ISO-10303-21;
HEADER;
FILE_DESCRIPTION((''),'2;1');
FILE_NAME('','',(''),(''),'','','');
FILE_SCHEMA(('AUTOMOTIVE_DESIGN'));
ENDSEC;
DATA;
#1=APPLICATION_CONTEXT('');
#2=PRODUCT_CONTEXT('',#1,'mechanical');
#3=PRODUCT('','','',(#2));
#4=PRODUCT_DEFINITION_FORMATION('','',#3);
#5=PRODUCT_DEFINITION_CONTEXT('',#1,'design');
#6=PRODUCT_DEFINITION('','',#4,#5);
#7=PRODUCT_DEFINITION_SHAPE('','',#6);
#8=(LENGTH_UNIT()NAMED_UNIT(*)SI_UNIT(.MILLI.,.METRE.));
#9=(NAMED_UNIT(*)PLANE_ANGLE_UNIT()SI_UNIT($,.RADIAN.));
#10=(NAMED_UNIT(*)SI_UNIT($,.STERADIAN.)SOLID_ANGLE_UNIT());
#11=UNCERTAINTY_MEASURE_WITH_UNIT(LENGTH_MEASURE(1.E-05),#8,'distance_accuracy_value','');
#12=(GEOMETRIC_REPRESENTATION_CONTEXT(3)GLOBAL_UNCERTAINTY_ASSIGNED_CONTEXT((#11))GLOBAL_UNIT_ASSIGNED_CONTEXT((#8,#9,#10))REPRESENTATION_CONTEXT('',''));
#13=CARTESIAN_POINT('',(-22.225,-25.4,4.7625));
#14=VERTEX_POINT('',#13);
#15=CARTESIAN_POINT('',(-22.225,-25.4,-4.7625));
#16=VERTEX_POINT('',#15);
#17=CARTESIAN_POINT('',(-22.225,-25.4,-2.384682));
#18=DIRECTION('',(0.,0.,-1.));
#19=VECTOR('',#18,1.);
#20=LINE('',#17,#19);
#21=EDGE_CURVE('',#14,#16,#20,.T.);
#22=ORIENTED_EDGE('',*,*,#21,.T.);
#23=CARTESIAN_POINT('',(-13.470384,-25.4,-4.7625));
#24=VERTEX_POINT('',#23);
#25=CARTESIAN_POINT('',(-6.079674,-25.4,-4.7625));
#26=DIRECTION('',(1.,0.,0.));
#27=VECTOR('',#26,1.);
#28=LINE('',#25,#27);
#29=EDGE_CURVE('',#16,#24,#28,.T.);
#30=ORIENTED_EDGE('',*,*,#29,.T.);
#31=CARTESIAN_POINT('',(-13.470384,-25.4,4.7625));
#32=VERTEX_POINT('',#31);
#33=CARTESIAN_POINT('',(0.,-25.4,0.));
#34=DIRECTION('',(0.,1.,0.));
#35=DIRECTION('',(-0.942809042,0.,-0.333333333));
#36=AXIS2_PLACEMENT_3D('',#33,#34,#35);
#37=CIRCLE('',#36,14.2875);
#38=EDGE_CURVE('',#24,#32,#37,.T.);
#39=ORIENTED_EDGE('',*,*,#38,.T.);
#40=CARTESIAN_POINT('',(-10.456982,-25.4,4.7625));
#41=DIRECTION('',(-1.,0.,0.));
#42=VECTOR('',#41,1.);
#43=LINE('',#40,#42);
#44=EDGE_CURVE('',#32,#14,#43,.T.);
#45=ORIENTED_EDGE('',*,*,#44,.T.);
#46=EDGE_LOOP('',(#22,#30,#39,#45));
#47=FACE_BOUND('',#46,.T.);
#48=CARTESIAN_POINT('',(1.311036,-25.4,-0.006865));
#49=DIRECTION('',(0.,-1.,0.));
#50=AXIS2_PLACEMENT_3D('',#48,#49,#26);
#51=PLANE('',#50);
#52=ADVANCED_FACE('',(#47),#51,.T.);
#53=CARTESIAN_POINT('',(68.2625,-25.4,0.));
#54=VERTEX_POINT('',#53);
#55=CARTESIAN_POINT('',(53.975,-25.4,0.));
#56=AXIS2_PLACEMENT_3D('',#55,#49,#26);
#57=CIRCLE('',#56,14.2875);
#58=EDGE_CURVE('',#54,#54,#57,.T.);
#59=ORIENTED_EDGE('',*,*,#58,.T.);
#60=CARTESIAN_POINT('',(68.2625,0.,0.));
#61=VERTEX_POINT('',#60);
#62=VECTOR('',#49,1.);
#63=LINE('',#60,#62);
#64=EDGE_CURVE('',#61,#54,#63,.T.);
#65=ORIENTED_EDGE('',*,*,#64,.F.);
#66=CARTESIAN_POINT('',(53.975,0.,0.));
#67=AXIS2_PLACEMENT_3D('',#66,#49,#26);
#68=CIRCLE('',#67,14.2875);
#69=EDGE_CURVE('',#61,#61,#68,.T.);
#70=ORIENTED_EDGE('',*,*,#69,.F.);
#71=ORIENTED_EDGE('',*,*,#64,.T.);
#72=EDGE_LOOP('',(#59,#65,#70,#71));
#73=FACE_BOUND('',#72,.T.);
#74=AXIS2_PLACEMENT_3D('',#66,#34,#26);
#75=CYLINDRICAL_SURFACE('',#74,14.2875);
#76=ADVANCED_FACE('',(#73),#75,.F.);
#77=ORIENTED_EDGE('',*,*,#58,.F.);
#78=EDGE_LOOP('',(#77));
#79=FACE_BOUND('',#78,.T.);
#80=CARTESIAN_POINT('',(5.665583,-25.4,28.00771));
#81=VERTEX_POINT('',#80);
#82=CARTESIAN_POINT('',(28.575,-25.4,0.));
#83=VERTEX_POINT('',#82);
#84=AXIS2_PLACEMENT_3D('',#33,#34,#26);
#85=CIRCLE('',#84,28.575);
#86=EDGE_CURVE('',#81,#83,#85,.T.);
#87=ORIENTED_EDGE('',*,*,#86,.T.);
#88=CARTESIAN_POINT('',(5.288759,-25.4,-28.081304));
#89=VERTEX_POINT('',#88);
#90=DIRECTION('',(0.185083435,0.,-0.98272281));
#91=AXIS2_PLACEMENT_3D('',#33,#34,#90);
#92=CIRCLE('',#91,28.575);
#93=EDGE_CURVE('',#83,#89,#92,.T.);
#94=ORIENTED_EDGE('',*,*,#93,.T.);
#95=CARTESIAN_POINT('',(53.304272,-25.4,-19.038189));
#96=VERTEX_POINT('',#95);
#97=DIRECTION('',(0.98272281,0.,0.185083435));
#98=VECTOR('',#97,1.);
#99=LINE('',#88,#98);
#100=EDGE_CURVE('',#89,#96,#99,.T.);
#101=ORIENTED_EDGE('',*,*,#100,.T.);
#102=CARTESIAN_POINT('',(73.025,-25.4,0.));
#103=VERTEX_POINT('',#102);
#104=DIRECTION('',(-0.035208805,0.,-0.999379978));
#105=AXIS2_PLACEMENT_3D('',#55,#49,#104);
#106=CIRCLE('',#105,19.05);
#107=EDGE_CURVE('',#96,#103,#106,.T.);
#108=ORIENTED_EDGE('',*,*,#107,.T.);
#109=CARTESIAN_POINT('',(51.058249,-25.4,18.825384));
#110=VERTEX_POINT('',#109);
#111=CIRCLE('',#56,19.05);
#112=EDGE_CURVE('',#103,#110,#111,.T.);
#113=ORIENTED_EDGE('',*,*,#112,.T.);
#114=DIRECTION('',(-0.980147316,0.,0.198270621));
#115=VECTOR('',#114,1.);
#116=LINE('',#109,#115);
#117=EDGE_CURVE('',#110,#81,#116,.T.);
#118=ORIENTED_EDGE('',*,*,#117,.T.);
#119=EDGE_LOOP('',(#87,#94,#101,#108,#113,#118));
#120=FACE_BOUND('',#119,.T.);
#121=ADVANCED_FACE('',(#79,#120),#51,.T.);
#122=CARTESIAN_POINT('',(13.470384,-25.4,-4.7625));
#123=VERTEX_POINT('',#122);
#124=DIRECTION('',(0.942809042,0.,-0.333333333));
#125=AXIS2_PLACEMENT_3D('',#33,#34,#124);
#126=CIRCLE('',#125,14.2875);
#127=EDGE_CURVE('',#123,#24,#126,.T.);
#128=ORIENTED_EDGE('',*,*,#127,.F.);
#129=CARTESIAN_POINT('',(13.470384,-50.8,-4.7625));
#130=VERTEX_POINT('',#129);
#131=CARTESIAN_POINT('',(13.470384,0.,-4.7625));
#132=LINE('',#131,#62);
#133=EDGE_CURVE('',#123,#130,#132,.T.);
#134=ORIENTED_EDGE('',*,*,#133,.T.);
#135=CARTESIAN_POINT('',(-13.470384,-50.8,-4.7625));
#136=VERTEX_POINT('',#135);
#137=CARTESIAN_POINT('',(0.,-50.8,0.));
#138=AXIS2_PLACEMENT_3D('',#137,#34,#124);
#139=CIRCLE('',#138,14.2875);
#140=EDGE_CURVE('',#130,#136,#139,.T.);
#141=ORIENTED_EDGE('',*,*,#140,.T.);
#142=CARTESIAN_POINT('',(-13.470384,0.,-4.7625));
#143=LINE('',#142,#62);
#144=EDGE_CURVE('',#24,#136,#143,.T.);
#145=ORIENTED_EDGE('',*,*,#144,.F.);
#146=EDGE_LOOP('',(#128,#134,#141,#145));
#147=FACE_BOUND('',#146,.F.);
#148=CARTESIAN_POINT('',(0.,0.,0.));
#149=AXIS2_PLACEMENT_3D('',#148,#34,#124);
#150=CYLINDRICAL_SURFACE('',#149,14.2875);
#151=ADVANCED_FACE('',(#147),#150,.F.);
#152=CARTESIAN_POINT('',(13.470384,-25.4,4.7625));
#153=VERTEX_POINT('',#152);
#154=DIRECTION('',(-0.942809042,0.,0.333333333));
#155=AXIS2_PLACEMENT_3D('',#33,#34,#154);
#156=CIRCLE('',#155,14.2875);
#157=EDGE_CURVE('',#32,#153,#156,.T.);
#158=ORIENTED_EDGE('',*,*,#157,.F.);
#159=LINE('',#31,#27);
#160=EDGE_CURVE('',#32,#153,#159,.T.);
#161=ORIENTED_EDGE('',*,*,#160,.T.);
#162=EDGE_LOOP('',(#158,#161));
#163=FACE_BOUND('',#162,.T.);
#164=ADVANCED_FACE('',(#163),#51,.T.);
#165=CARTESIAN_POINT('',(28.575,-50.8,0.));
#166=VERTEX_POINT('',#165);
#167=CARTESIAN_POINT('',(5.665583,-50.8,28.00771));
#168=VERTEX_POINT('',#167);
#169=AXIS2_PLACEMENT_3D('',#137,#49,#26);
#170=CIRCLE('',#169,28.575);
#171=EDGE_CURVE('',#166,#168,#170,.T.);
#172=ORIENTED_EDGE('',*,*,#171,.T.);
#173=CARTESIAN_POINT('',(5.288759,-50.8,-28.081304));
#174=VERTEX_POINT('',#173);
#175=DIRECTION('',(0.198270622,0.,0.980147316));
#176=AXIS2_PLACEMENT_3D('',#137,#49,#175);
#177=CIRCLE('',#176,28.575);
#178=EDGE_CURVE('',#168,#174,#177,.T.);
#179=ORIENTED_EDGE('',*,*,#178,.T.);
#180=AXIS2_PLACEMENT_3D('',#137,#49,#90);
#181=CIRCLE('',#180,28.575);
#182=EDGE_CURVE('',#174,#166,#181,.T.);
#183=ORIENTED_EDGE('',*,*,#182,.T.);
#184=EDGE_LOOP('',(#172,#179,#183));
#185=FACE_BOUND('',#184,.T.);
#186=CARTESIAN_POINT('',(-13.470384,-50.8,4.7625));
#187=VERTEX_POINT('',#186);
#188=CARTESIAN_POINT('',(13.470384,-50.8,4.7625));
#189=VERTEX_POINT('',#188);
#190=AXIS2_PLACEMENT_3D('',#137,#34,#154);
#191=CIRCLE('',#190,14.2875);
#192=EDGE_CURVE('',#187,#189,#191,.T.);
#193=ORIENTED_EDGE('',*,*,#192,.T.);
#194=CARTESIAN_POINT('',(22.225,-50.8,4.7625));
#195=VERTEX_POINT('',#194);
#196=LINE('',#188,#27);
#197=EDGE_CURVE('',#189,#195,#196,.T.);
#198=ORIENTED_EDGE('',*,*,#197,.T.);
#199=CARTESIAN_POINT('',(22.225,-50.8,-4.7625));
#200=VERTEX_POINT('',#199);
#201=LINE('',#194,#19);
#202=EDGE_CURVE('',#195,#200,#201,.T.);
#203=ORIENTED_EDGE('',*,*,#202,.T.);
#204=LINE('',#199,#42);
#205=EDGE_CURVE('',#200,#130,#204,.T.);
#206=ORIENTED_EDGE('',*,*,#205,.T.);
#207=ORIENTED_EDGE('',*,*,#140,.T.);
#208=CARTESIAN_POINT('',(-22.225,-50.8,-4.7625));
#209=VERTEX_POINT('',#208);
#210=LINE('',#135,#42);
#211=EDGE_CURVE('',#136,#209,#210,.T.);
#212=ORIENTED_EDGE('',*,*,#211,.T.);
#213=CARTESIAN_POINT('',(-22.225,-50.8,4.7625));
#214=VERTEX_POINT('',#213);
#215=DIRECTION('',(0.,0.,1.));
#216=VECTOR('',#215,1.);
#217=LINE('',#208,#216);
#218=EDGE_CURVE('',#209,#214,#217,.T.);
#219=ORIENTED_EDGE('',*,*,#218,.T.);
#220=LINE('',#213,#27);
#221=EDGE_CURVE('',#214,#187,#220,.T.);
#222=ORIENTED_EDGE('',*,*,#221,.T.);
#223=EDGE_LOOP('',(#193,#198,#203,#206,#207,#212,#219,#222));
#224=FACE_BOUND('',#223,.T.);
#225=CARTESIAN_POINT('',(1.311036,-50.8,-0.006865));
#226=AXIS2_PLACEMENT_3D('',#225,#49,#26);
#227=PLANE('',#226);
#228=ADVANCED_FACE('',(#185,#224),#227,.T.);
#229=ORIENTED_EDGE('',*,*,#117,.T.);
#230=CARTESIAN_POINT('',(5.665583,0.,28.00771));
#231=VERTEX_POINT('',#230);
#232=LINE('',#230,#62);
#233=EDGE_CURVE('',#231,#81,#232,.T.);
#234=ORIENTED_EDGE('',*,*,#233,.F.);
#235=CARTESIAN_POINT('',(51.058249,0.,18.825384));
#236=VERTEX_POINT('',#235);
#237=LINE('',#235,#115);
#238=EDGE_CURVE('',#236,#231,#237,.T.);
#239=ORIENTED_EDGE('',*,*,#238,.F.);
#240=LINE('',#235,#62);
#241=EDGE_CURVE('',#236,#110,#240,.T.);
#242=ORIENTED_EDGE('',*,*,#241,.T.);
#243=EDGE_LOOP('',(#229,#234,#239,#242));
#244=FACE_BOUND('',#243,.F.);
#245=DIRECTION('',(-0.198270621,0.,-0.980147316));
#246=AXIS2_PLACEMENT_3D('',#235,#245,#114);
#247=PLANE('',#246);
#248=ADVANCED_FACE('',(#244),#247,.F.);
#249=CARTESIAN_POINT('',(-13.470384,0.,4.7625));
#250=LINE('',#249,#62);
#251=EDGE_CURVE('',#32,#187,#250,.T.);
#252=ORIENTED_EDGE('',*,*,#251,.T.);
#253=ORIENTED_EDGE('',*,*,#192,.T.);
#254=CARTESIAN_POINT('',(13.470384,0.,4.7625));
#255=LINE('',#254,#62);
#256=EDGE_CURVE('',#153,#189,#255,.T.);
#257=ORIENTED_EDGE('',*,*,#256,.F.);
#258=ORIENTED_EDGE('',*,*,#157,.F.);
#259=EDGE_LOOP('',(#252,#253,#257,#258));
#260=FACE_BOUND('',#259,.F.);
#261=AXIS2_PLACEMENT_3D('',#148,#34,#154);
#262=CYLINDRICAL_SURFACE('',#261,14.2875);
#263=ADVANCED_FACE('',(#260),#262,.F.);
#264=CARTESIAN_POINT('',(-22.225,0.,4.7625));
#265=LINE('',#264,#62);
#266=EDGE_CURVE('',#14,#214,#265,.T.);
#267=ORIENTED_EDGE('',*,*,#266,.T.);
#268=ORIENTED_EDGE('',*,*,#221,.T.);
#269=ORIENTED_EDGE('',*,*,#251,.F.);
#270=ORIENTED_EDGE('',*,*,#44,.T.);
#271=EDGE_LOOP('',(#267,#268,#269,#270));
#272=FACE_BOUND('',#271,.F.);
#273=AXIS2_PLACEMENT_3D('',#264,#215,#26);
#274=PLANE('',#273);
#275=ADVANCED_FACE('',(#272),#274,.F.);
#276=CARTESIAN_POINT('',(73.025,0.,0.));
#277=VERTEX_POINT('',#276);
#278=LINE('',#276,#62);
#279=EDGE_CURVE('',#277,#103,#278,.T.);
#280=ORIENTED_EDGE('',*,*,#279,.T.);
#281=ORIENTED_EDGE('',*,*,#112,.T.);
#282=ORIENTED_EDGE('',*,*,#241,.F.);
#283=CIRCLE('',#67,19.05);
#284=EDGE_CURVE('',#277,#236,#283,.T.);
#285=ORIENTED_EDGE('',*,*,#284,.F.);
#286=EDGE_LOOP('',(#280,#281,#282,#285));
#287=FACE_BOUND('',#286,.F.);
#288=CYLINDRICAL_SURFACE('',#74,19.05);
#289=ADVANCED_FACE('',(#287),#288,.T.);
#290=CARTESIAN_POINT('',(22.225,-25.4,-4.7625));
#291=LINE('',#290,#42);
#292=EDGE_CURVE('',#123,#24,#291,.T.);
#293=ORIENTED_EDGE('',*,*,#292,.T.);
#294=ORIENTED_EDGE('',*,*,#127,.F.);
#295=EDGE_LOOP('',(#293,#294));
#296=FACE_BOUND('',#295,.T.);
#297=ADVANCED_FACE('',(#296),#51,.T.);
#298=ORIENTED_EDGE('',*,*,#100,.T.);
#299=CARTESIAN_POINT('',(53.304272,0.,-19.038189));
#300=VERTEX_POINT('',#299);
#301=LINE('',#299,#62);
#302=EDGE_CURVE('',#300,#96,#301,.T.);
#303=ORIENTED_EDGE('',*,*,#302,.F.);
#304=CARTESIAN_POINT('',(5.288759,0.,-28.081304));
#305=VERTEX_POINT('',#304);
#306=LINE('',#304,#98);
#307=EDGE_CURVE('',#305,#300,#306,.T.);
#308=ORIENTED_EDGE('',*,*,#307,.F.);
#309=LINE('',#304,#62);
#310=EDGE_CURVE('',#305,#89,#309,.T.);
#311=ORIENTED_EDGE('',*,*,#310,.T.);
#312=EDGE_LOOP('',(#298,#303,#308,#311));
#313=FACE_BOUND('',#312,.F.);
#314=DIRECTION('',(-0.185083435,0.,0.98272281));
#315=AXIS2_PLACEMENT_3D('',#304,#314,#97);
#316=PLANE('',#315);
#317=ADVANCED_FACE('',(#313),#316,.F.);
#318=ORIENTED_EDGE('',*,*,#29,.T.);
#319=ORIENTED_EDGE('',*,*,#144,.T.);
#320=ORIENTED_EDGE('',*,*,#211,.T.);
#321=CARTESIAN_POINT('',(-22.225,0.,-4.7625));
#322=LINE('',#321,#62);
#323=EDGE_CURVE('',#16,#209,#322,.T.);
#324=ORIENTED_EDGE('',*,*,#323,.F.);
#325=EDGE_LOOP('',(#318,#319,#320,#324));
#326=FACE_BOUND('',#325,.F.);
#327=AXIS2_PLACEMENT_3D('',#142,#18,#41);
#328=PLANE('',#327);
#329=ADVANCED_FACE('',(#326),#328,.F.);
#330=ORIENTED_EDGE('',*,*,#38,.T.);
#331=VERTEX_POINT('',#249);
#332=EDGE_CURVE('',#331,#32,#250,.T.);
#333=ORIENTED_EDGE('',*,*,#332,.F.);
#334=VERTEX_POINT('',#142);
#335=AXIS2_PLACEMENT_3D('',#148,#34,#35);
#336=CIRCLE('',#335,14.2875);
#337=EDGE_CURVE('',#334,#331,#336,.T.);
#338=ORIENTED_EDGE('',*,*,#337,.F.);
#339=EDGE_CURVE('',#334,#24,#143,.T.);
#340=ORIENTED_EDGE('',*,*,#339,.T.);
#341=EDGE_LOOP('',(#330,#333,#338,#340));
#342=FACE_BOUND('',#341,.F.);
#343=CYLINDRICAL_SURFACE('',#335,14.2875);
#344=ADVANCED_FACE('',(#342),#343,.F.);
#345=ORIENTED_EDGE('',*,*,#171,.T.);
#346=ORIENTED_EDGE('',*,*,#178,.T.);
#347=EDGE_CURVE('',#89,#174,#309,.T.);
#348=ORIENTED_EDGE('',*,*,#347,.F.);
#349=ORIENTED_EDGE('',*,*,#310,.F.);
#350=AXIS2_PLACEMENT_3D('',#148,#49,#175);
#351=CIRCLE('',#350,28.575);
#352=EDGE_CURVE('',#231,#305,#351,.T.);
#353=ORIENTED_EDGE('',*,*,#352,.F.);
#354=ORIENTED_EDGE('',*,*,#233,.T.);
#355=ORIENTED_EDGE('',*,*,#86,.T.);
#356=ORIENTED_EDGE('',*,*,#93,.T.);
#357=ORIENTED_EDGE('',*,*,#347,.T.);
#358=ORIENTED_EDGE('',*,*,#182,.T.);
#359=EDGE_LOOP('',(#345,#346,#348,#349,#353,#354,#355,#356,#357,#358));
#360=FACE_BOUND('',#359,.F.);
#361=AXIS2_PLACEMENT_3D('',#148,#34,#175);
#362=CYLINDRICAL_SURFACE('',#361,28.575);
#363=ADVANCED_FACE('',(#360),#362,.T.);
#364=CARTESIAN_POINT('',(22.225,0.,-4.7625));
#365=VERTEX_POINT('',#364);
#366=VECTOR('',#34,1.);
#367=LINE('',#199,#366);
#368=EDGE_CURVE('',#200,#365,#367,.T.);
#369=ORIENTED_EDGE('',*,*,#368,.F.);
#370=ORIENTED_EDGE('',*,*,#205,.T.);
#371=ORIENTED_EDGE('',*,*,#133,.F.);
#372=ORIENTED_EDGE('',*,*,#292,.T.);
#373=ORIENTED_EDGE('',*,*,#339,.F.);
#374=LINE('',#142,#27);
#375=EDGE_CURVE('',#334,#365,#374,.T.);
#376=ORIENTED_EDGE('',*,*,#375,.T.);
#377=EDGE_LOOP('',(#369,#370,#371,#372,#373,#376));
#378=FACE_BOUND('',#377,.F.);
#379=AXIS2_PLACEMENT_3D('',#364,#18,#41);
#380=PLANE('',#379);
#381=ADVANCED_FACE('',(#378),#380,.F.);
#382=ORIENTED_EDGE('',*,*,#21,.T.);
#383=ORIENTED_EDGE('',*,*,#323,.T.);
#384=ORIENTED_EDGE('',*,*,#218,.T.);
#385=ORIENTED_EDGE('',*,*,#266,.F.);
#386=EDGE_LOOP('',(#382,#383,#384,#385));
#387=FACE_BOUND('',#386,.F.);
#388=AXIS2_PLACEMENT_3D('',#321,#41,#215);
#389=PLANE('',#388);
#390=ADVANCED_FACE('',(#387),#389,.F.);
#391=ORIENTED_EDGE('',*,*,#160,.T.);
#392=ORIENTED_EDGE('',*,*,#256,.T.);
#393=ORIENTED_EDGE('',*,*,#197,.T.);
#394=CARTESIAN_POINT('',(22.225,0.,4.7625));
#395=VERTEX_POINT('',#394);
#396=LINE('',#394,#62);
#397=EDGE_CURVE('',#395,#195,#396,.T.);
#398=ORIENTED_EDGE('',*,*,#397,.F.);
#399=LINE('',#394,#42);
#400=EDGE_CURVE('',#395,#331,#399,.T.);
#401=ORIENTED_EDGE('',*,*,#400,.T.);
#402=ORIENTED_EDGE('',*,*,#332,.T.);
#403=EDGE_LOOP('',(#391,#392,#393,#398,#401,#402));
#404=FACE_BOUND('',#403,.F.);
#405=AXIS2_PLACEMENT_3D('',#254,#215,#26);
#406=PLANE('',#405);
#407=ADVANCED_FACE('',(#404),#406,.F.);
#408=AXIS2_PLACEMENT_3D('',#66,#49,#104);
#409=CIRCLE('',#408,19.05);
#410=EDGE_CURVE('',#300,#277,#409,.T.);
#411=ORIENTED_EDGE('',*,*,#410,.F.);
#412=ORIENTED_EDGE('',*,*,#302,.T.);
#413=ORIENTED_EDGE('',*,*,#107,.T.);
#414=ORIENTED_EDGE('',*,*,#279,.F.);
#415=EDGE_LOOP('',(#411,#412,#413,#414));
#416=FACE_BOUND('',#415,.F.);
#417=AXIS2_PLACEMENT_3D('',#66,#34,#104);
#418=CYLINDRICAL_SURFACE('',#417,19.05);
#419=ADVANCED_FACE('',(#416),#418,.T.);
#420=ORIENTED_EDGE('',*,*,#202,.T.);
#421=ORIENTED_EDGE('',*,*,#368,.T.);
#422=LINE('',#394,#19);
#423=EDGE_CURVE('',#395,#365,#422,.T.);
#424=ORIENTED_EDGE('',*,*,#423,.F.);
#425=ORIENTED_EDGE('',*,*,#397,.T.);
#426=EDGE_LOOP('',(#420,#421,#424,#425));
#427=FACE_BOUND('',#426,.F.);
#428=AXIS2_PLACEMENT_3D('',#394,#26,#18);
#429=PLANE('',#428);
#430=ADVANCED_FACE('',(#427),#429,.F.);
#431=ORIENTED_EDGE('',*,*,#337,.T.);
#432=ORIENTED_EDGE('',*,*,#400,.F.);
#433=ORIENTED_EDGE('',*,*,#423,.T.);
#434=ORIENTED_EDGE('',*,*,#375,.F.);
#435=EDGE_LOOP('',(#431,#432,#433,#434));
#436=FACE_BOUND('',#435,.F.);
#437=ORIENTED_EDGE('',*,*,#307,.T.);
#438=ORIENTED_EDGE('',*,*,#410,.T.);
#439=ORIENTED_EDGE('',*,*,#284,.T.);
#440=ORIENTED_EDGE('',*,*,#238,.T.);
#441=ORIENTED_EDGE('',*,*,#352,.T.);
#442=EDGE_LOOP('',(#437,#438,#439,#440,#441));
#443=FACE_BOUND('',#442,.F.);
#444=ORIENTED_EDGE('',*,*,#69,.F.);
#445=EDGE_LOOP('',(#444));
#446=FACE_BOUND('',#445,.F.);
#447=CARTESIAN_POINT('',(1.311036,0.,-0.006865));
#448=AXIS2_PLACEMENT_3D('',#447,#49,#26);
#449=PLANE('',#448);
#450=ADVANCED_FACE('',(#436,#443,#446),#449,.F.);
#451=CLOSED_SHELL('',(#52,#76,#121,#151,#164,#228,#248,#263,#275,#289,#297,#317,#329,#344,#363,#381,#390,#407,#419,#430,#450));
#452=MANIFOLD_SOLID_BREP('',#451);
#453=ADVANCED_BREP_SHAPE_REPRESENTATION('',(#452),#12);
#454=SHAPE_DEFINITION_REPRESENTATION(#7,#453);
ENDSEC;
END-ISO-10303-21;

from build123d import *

# Parameters (mm, degrees)
F0_R     = 14.2875
F1_DEPTH = 25.4
F2_DEPTH = 25.4
F3_DEPTH = 50.8


with BuildPart() as f1:
    # F0 (on Front) → F1 (new body)
    with BuildSketch(Plane.XZ):
        with BuildLine():
            ThreePointArc((5.2887591577, -28.0813043068), (21.9961009946, -18.240125165), (28.575, 0))
            ThreePointArc((28.575, 0), (22.118144808, 18.0919400633), (5.6655830094, 28.0077095487))
            ThreePointArc((5.6655830094, 28.0077095487), (-28.5743551441, 0.1919716148), (5.2887591577, -28.0813043068))
        make_face()
        with BuildLine():
            ThreePointArc((-13.4703841816, 4.7625), (0, 14.2875), (13.4703841816, 4.7625))
            Line((13.4703841816, 4.7625), (22.225, 4.7625))
            Line((22.225, 4.7625), (22.225, -4.7625))
            Line((22.225, -4.7625), (13.4703841816, -4.7625))
            ThreePointArc((13.4703841816, -4.7625), (0, -14.2875), (-13.4703841816, -4.7625))
            Line((-13.4703841816, -4.7625), (-22.225, -4.7625))
            Line((-22.225, -4.7625), (-22.225, 4.7625))
            Line((-22.225, 4.7625), (-13.4703841816, 4.7625))
        make_face(mode=Mode.SUBTRACT)
        with BuildLine():
            ThreePointArc((73.025, 0), (66.3713381906, 14.464898875), (51.0582494002, 18.8253835536))
            ThreePointArc((51.0582494002, 18.8253835536), (34.9584276531, -1.1280408576), (53.304272269, -19.0381885775))
            ThreePointArc((53.304272269, -19.0381885775), (67.2061212058, -13.7054708652), (73.025, 0))
        make_face()
        with Locations((53.975, 0)):
            Circle(F0_R, mode=Mode.SUBTRACT)
        with BuildLine():
            ThreePointArc((5.6655830094, 28.0077095487), (22.118144808, 18.0919400633), (28.575, 0))
            ThreePointArc((28.575, 0), (21.9961009946, -18.240125165), (5.2887591577, -28.0813043068))
            Line((5.2887591577, -28.0813043068), (53.304272269, -19.0381885775))
            ThreePointArc((53.304272269, -19.0381885775), (34.9584276531, -1.1280408576), (51.0582494002, 18.8253835536))
            Line((51.0582494002, 18.8253835536), (5.6655830094, 28.0077095487))
        make_face()
        with BuildLine():
            ThreePointArc((-13.4703841816, -4.7625), (-14.2875, 0), (-13.4703841816, 4.7625))
            Line((-13.4703841816, 4.7625), (-22.225, 4.7625))
            Line((-22.225, 4.7625), (-22.225, -4.7625))
            Line((-22.225, -4.7625), (-13.4703841816, -4.7625))
        make_face()
    extrude(amount=F1_DEPTH)

    # F0 (on Front) → F2 (join)
    with BuildSketch(Plane.XZ):
        with BuildLine():
            ThreePointArc((5.6655830094, 28.0077095487), (22.118144808, 18.0919400633), (28.575, 0))
            ThreePointArc((28.575, 0), (21.9961009946, -18.240125165), (5.2887591577, -28.0813043068))
            Line((5.2887591577, -28.0813043068), (53.304272269, -19.0381885775))
            ThreePointArc((53.304272269, -19.0381885775), (34.9584276531, -1.1280408576), (51.0582494002, 18.8253835536))
            Line((51.0582494002, 18.8253835536), (5.6655830094, 28.0077095487))
        make_face()
        with BuildLine():
            Line((-13.4703841816, 4.7625), (13.4703841816, 4.7625))
            ThreePointArc((13.4703841816, 4.7625), (0, 14.2875), (-13.4703841816, 4.7625))
        make_face()
        with BuildLine():
            ThreePointArc((-13.4703841816, -4.7625), (0, -14.2875), (13.4703841816, -4.7625))
            Line((13.4703841816, -4.7625), (-13.4703841816, -4.7625))
        make_face()
    extrude(amount=F2_DEPTH)

    # F0 (on Front) → F3 (join)
    with BuildSketch(Plane.XZ):
        with BuildLine():
            ThreePointArc((5.2887591577, -28.0813043068), (21.9961009946, -18.240125165), (28.575, 0))
            ThreePointArc((28.575, 0), (22.118144808, 18.0919400633), (5.6655830094, 28.0077095487))
            ThreePointArc((5.6655830094, 28.0077095487), (-28.5743551441, 0.1919716148), (5.2887591577, -28.0813043068))
        make_face()
        with BuildLine():
            ThreePointArc((-13.4703841816, 4.7625), (0, 14.2875), (13.4703841816, 4.7625))
            Line((13.4703841816, 4.7625), (22.225, 4.7625))
            Line((22.225, 4.7625), (22.225, -4.7625))
            Line((22.225, -4.7625), (13.4703841816, -4.7625))
            ThreePointArc((13.4703841816, -4.7625), (0, -14.2875), (-13.4703841816, -4.7625))
            Line((-13.4703841816, -4.7625), (-22.225, -4.7625))
            Line((-22.225, -4.7625), (-22.225, 4.7625))
            Line((-22.225, 4.7625), (-13.4703841816, 4.7625))
        make_face(mode=Mode.SUBTRACT)
    extrude(amount=F3_DEPTH)


solid = f1.part
